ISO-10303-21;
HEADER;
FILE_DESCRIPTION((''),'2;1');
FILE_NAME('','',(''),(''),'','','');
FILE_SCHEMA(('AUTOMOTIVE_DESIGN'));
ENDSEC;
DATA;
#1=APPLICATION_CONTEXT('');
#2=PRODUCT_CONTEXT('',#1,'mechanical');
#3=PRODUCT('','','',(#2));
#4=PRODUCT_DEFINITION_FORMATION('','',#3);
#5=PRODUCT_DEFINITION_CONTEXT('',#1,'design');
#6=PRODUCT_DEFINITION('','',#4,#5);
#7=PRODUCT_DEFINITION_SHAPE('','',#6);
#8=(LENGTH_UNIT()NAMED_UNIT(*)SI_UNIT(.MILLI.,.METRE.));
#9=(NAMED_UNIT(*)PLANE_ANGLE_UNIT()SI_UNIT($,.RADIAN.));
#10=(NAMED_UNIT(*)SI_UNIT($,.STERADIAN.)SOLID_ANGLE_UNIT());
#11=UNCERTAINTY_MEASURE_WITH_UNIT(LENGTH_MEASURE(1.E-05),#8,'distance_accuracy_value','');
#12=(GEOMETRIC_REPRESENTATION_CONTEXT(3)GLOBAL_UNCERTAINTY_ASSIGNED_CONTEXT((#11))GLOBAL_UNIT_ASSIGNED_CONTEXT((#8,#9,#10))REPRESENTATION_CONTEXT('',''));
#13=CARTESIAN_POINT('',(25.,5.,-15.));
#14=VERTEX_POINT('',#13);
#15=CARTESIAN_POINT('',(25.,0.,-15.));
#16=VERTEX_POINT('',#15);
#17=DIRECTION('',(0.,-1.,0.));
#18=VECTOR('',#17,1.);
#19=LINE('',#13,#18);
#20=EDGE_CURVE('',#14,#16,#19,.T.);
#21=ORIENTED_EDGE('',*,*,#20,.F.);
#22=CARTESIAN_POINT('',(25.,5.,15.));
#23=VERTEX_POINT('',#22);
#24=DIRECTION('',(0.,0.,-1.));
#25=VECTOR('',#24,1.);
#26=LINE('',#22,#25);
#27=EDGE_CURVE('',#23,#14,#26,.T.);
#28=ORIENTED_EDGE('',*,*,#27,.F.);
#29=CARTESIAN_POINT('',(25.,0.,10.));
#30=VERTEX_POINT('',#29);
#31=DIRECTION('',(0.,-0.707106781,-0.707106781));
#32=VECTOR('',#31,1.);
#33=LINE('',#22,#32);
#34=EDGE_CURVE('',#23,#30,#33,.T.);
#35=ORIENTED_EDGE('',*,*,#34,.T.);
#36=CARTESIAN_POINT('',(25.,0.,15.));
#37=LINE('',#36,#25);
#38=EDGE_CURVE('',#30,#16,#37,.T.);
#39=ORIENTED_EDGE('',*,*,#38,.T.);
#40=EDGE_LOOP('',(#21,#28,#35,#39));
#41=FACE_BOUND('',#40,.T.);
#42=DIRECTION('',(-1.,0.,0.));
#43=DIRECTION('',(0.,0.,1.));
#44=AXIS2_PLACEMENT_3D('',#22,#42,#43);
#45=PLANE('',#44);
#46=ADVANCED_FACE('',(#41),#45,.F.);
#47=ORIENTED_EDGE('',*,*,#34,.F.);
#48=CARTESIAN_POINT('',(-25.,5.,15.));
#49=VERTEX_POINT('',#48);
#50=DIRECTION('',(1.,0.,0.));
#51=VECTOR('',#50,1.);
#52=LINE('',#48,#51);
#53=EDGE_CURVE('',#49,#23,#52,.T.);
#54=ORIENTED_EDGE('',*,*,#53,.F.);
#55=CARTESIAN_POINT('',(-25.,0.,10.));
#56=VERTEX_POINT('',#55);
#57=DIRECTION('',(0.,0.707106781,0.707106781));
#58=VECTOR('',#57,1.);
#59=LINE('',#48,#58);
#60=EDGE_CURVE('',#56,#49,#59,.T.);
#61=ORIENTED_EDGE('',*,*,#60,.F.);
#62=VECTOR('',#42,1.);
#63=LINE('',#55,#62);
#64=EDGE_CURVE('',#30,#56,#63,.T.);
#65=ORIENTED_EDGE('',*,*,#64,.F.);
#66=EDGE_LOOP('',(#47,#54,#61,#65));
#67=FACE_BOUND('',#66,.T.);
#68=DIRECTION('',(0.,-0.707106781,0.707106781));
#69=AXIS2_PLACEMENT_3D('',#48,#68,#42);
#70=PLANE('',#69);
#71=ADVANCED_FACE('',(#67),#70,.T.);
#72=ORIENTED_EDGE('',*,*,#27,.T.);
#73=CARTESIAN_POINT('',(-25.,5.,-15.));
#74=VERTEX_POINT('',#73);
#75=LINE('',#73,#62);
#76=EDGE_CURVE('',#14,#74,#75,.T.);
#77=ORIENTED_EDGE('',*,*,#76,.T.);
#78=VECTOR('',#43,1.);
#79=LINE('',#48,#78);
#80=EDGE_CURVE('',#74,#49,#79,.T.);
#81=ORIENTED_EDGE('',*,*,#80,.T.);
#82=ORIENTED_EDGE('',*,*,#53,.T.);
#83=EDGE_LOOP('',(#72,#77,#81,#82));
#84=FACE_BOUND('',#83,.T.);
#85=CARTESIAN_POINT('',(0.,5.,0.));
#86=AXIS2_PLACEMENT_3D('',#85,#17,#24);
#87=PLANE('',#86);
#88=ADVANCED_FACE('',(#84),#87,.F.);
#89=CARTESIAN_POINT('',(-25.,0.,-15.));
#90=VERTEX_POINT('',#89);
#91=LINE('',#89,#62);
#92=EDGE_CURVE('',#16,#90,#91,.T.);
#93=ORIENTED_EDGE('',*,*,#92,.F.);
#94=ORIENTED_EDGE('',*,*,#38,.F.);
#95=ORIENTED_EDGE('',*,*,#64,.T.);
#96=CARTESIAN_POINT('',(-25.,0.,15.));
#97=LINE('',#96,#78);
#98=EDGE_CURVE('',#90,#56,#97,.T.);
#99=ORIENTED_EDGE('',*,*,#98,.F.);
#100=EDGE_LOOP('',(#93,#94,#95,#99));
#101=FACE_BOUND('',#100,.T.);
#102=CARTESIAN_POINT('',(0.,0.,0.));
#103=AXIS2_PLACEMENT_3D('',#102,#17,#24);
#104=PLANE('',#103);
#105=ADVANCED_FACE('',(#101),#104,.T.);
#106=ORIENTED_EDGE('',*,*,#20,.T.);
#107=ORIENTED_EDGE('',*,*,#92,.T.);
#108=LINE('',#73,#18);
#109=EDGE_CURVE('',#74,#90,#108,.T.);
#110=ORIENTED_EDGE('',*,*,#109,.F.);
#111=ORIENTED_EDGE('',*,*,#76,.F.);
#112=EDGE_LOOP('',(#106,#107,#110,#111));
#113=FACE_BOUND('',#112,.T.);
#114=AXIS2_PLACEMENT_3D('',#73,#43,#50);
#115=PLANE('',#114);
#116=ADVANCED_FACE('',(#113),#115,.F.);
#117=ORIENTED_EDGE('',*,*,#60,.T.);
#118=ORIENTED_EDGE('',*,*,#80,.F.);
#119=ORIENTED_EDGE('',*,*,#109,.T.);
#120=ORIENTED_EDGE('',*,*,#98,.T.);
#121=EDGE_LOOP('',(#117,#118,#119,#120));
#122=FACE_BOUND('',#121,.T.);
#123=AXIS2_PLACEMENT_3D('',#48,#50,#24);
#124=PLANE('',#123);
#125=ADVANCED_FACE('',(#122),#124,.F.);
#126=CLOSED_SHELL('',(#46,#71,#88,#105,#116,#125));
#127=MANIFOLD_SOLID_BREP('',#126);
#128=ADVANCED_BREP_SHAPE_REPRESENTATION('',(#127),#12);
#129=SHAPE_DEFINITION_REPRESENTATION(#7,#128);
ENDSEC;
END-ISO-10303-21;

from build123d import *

# Parameters (mm, degrees)
SKETCH1_W           = 50
SKETCH1_H           = 30
BOSS_EXTRUDE1_DEPTH = 5
CHAMFER1_SIZE       = 5


with BuildPart() as part:
    # Sketch1 → Boss-Extrude1 (new body)
    with BuildSketch(Plane(origin=(0, 0, 0), x_dir=(1, 0, 0), z_dir=(0, 1, 0))):
        Rectangle(SKETCH1_W, SKETCH1_H)
    extrude(amount=BOSS_EXTRUDE1_DEPTH)

    # Chamfer1
    chamfer1_edges = [part.edges().sort_by_distance(p)[0] for p in [
        (0, 0, 15),
    ]]
    chamfer(chamfer1_edges, length=CHAMFER1_SIZE - 0.0001)  # a hair under: the kernel refuses the full size


solid = part.part
